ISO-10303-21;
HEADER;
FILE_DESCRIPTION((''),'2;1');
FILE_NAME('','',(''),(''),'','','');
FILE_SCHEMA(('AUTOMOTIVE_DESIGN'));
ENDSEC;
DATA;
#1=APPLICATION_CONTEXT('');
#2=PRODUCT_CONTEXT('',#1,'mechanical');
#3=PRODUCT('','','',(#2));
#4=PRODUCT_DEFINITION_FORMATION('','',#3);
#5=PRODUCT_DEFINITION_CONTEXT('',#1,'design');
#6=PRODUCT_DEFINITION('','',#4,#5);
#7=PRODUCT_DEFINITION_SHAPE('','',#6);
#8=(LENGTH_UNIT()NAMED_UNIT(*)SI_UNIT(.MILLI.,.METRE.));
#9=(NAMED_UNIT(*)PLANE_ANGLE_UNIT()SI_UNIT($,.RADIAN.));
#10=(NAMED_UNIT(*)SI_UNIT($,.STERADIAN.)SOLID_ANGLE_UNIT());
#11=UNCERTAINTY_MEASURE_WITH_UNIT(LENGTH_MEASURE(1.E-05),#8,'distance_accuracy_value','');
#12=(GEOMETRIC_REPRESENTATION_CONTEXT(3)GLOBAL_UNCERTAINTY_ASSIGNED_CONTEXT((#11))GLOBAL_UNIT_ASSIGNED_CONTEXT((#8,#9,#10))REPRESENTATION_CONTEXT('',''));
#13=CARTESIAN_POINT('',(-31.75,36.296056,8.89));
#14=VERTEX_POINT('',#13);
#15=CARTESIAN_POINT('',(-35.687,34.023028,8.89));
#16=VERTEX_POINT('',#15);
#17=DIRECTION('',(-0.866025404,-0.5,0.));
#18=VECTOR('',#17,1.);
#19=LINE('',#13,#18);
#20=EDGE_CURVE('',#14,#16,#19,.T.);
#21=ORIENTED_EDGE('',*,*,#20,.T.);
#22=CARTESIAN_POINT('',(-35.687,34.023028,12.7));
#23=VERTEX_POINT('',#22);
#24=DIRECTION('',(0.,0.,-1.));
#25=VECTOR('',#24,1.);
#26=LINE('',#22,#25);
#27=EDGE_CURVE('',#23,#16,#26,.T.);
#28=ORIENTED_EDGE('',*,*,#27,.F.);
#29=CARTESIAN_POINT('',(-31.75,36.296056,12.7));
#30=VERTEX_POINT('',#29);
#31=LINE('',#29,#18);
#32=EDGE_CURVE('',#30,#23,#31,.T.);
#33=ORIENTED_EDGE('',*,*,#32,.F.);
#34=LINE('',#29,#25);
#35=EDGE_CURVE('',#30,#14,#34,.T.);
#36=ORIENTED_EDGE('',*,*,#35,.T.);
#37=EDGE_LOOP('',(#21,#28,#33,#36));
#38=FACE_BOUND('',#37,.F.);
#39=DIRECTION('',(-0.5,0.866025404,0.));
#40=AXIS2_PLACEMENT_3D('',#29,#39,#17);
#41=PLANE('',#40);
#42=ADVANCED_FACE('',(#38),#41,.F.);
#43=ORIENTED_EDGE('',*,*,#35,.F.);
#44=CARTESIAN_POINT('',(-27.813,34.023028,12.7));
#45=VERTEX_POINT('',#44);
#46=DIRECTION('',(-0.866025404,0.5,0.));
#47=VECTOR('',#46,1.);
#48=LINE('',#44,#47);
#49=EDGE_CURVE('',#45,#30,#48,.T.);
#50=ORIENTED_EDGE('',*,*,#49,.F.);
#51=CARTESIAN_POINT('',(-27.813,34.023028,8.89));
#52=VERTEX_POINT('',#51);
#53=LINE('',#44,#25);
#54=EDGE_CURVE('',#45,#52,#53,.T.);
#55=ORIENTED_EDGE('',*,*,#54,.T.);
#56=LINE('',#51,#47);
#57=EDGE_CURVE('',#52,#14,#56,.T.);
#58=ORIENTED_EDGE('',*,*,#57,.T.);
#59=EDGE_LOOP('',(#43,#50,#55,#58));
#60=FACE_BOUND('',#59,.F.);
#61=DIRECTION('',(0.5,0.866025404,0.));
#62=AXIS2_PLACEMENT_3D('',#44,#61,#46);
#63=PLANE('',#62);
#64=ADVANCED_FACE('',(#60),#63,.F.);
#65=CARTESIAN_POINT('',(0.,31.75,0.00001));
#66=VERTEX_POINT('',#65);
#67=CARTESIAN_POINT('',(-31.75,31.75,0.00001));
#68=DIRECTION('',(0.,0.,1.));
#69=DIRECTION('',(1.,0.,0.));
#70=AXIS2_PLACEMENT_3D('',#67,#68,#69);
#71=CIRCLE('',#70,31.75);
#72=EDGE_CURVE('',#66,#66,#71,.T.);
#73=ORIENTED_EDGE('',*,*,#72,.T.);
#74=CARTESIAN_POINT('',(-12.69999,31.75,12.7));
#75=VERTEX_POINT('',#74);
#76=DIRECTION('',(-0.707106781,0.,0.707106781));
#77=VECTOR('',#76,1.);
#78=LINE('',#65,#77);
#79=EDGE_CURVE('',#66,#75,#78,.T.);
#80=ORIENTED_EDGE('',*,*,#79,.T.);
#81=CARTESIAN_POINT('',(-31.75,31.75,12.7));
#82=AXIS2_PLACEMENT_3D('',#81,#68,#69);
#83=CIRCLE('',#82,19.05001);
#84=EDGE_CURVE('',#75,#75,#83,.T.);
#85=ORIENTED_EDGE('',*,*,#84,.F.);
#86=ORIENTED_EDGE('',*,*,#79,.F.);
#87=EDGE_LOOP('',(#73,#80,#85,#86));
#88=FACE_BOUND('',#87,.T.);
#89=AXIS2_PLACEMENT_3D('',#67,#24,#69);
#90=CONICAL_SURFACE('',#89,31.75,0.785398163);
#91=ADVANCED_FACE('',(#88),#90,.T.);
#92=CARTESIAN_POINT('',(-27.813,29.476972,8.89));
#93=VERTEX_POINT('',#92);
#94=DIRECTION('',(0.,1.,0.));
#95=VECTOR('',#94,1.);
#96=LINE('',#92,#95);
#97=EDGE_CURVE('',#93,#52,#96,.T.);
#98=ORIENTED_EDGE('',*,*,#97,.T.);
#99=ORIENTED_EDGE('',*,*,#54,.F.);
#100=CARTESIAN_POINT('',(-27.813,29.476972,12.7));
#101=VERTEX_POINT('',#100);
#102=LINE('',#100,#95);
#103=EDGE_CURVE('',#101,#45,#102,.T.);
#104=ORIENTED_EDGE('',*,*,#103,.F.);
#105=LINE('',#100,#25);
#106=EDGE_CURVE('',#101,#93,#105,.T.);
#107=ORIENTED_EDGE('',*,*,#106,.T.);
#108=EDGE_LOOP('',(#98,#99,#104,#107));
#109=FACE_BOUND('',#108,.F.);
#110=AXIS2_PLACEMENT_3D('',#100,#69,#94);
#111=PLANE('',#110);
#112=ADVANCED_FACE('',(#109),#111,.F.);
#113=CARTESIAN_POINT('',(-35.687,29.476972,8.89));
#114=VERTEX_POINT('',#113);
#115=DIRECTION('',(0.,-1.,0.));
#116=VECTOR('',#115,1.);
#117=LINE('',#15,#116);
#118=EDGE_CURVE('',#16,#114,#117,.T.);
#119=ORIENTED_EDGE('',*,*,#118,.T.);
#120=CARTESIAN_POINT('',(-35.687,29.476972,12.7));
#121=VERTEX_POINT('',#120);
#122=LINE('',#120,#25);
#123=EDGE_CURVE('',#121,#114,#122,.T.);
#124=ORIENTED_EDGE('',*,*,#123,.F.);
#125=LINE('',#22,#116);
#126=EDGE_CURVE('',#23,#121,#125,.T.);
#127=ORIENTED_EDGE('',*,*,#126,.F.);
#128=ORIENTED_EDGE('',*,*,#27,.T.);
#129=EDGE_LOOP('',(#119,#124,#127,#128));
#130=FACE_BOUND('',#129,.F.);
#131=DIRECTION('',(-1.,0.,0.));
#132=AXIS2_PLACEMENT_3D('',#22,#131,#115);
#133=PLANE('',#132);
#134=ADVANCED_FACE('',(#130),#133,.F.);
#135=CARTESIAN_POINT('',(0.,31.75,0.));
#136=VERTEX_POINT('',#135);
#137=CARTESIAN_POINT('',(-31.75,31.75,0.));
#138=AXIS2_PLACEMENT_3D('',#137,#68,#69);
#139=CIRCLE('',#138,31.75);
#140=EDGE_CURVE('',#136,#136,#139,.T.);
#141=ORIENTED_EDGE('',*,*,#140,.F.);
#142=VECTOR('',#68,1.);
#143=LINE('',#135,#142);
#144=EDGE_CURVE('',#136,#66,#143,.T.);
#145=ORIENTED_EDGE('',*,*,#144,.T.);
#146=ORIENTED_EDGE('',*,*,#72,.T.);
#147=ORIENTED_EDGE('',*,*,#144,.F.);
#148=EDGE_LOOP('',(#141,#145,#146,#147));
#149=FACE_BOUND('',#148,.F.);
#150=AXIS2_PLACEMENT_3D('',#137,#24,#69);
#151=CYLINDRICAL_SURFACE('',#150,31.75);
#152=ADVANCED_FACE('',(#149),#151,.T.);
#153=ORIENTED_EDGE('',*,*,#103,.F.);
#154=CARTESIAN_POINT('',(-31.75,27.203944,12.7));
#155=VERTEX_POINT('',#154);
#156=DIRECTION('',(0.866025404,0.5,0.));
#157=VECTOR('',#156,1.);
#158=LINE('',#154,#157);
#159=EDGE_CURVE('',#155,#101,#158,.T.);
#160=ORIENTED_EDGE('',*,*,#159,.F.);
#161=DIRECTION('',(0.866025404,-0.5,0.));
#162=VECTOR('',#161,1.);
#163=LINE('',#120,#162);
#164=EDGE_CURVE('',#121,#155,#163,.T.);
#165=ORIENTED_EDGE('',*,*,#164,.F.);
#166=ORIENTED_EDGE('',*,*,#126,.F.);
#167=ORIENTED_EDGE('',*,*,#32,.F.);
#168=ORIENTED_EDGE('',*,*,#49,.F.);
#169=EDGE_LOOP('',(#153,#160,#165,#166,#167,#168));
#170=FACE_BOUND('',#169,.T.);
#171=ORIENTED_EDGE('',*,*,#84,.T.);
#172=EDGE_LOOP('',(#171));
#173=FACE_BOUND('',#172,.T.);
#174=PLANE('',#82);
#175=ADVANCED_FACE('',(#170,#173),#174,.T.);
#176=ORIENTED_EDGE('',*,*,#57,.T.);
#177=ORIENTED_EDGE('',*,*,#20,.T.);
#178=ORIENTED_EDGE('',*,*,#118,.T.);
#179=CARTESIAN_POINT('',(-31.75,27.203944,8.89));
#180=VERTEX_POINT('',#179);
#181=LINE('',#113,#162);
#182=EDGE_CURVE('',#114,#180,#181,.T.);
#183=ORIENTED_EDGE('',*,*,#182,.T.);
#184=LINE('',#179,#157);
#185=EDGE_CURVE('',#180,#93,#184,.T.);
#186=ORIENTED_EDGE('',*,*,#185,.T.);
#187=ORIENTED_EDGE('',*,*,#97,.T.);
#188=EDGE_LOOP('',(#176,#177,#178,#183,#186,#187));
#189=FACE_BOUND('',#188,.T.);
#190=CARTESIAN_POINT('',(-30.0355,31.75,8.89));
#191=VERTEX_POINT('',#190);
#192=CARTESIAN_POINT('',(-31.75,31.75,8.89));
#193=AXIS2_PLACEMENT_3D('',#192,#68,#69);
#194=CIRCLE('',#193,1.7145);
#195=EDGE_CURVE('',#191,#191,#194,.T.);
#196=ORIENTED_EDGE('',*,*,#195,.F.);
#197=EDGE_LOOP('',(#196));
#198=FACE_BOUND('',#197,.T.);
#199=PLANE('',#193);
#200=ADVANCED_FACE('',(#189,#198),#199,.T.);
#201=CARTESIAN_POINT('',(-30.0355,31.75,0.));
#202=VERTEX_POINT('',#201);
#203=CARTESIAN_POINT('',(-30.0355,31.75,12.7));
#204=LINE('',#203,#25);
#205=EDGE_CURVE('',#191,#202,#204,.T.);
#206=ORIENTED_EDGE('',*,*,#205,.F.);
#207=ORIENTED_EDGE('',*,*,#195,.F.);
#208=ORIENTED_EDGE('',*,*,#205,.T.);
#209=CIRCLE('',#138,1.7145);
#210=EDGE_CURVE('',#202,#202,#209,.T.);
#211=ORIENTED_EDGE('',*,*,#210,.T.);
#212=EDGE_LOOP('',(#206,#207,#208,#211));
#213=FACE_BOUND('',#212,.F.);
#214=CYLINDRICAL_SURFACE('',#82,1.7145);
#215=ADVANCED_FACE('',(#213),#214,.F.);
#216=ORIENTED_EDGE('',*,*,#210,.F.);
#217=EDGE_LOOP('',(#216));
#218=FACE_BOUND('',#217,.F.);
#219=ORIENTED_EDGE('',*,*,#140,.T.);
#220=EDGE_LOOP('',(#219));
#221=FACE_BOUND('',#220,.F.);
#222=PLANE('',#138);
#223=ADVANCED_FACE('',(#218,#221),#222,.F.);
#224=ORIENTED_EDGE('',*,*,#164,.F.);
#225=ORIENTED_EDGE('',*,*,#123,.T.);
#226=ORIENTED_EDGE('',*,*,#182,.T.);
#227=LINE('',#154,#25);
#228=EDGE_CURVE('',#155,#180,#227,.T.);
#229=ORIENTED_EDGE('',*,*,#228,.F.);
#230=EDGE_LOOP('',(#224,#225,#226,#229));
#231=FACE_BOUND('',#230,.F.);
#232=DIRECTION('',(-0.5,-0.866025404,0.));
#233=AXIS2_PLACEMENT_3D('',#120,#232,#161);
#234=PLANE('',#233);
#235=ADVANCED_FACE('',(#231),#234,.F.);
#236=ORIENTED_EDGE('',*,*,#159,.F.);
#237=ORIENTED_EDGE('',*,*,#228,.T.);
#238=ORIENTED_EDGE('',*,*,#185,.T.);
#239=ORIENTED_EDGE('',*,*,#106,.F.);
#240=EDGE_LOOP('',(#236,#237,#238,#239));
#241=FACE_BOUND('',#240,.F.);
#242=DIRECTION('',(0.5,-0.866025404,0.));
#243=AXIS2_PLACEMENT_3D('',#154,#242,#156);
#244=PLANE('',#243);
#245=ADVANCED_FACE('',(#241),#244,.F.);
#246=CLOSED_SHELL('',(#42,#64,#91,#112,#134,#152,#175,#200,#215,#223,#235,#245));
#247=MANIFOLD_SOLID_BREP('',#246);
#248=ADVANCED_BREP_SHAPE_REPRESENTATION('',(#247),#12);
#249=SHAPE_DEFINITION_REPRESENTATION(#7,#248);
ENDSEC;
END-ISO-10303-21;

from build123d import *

# Parameters (mm, degrees)
F2_R     = 25.4
F2_R_2   = 1.7145
F4_DEPTH = 12.7
F0_R     = 31.75
F0_R_2   = 1.7145
F5_DEPTH = 12.7
F6_R     = 1.7145
F7_DEPTH = 3.81
F8_SIZE2 = 12.69999
F8_SIZE  = 12.69999


# Not quite as in the source:
# - a fillet or chamfer is up to 0.001 mm smaller than in the source, because OpenCascade refuses the exact size


with BuildPart() as f4:
    # F2 (on offset) → F4 (new body)
    with BuildSketch(Plane.XY.offset(12.7)):
        with Locations((-31.75, 31.75)):
            Circle(F2_R)
        with Locations((-31.75, 31.75)):
            Circle(F2_R_2, mode=Mode.SUBTRACT)
    extrude(amount=-F4_DEPTH)

    # F0 (on Top) → F5 (join)
    with BuildSketch(Plane.XY):
        with Locations((-31.75, 31.75)):
            Circle(F0_R)
        with Locations((-31.75, 31.75)):
            Circle(F0_R_2, mode=Mode.SUBTRACT)
    extrude(amount=F5_DEPTH)

    # F6 (on face) → F7 (cut)
    with BuildSketch(Plane.XY.offset(12.7)):
        Polygon((-27.813, 29.4769719902), (-27.813, 34.0230280098), (-31.75, 36.2960560196), (-35.687, 34.0230280098), (-35.687, 29.4769719902), (-31.75, 27.2039439804), align=None)
        with Locations((-31.75, 31.75)):
            Circle(F6_R, mode=Mode.SUBTRACT)
    extrude(amount=-F7_DEPTH, mode=Mode.SUBTRACT)

    # F8 (size 12.7 and 12.7 in the source; OpenCascade refuses exactly that, so slightly less here)
    f8_edges = [f4.edges().sort_by_distance(p)[0] for p in [
        (-63.5, 31.75, 12.7),
    ]]
    chamfer(f8_edges, length=F8_SIZE, length2=F8_SIZE2)


solid = f4.part
